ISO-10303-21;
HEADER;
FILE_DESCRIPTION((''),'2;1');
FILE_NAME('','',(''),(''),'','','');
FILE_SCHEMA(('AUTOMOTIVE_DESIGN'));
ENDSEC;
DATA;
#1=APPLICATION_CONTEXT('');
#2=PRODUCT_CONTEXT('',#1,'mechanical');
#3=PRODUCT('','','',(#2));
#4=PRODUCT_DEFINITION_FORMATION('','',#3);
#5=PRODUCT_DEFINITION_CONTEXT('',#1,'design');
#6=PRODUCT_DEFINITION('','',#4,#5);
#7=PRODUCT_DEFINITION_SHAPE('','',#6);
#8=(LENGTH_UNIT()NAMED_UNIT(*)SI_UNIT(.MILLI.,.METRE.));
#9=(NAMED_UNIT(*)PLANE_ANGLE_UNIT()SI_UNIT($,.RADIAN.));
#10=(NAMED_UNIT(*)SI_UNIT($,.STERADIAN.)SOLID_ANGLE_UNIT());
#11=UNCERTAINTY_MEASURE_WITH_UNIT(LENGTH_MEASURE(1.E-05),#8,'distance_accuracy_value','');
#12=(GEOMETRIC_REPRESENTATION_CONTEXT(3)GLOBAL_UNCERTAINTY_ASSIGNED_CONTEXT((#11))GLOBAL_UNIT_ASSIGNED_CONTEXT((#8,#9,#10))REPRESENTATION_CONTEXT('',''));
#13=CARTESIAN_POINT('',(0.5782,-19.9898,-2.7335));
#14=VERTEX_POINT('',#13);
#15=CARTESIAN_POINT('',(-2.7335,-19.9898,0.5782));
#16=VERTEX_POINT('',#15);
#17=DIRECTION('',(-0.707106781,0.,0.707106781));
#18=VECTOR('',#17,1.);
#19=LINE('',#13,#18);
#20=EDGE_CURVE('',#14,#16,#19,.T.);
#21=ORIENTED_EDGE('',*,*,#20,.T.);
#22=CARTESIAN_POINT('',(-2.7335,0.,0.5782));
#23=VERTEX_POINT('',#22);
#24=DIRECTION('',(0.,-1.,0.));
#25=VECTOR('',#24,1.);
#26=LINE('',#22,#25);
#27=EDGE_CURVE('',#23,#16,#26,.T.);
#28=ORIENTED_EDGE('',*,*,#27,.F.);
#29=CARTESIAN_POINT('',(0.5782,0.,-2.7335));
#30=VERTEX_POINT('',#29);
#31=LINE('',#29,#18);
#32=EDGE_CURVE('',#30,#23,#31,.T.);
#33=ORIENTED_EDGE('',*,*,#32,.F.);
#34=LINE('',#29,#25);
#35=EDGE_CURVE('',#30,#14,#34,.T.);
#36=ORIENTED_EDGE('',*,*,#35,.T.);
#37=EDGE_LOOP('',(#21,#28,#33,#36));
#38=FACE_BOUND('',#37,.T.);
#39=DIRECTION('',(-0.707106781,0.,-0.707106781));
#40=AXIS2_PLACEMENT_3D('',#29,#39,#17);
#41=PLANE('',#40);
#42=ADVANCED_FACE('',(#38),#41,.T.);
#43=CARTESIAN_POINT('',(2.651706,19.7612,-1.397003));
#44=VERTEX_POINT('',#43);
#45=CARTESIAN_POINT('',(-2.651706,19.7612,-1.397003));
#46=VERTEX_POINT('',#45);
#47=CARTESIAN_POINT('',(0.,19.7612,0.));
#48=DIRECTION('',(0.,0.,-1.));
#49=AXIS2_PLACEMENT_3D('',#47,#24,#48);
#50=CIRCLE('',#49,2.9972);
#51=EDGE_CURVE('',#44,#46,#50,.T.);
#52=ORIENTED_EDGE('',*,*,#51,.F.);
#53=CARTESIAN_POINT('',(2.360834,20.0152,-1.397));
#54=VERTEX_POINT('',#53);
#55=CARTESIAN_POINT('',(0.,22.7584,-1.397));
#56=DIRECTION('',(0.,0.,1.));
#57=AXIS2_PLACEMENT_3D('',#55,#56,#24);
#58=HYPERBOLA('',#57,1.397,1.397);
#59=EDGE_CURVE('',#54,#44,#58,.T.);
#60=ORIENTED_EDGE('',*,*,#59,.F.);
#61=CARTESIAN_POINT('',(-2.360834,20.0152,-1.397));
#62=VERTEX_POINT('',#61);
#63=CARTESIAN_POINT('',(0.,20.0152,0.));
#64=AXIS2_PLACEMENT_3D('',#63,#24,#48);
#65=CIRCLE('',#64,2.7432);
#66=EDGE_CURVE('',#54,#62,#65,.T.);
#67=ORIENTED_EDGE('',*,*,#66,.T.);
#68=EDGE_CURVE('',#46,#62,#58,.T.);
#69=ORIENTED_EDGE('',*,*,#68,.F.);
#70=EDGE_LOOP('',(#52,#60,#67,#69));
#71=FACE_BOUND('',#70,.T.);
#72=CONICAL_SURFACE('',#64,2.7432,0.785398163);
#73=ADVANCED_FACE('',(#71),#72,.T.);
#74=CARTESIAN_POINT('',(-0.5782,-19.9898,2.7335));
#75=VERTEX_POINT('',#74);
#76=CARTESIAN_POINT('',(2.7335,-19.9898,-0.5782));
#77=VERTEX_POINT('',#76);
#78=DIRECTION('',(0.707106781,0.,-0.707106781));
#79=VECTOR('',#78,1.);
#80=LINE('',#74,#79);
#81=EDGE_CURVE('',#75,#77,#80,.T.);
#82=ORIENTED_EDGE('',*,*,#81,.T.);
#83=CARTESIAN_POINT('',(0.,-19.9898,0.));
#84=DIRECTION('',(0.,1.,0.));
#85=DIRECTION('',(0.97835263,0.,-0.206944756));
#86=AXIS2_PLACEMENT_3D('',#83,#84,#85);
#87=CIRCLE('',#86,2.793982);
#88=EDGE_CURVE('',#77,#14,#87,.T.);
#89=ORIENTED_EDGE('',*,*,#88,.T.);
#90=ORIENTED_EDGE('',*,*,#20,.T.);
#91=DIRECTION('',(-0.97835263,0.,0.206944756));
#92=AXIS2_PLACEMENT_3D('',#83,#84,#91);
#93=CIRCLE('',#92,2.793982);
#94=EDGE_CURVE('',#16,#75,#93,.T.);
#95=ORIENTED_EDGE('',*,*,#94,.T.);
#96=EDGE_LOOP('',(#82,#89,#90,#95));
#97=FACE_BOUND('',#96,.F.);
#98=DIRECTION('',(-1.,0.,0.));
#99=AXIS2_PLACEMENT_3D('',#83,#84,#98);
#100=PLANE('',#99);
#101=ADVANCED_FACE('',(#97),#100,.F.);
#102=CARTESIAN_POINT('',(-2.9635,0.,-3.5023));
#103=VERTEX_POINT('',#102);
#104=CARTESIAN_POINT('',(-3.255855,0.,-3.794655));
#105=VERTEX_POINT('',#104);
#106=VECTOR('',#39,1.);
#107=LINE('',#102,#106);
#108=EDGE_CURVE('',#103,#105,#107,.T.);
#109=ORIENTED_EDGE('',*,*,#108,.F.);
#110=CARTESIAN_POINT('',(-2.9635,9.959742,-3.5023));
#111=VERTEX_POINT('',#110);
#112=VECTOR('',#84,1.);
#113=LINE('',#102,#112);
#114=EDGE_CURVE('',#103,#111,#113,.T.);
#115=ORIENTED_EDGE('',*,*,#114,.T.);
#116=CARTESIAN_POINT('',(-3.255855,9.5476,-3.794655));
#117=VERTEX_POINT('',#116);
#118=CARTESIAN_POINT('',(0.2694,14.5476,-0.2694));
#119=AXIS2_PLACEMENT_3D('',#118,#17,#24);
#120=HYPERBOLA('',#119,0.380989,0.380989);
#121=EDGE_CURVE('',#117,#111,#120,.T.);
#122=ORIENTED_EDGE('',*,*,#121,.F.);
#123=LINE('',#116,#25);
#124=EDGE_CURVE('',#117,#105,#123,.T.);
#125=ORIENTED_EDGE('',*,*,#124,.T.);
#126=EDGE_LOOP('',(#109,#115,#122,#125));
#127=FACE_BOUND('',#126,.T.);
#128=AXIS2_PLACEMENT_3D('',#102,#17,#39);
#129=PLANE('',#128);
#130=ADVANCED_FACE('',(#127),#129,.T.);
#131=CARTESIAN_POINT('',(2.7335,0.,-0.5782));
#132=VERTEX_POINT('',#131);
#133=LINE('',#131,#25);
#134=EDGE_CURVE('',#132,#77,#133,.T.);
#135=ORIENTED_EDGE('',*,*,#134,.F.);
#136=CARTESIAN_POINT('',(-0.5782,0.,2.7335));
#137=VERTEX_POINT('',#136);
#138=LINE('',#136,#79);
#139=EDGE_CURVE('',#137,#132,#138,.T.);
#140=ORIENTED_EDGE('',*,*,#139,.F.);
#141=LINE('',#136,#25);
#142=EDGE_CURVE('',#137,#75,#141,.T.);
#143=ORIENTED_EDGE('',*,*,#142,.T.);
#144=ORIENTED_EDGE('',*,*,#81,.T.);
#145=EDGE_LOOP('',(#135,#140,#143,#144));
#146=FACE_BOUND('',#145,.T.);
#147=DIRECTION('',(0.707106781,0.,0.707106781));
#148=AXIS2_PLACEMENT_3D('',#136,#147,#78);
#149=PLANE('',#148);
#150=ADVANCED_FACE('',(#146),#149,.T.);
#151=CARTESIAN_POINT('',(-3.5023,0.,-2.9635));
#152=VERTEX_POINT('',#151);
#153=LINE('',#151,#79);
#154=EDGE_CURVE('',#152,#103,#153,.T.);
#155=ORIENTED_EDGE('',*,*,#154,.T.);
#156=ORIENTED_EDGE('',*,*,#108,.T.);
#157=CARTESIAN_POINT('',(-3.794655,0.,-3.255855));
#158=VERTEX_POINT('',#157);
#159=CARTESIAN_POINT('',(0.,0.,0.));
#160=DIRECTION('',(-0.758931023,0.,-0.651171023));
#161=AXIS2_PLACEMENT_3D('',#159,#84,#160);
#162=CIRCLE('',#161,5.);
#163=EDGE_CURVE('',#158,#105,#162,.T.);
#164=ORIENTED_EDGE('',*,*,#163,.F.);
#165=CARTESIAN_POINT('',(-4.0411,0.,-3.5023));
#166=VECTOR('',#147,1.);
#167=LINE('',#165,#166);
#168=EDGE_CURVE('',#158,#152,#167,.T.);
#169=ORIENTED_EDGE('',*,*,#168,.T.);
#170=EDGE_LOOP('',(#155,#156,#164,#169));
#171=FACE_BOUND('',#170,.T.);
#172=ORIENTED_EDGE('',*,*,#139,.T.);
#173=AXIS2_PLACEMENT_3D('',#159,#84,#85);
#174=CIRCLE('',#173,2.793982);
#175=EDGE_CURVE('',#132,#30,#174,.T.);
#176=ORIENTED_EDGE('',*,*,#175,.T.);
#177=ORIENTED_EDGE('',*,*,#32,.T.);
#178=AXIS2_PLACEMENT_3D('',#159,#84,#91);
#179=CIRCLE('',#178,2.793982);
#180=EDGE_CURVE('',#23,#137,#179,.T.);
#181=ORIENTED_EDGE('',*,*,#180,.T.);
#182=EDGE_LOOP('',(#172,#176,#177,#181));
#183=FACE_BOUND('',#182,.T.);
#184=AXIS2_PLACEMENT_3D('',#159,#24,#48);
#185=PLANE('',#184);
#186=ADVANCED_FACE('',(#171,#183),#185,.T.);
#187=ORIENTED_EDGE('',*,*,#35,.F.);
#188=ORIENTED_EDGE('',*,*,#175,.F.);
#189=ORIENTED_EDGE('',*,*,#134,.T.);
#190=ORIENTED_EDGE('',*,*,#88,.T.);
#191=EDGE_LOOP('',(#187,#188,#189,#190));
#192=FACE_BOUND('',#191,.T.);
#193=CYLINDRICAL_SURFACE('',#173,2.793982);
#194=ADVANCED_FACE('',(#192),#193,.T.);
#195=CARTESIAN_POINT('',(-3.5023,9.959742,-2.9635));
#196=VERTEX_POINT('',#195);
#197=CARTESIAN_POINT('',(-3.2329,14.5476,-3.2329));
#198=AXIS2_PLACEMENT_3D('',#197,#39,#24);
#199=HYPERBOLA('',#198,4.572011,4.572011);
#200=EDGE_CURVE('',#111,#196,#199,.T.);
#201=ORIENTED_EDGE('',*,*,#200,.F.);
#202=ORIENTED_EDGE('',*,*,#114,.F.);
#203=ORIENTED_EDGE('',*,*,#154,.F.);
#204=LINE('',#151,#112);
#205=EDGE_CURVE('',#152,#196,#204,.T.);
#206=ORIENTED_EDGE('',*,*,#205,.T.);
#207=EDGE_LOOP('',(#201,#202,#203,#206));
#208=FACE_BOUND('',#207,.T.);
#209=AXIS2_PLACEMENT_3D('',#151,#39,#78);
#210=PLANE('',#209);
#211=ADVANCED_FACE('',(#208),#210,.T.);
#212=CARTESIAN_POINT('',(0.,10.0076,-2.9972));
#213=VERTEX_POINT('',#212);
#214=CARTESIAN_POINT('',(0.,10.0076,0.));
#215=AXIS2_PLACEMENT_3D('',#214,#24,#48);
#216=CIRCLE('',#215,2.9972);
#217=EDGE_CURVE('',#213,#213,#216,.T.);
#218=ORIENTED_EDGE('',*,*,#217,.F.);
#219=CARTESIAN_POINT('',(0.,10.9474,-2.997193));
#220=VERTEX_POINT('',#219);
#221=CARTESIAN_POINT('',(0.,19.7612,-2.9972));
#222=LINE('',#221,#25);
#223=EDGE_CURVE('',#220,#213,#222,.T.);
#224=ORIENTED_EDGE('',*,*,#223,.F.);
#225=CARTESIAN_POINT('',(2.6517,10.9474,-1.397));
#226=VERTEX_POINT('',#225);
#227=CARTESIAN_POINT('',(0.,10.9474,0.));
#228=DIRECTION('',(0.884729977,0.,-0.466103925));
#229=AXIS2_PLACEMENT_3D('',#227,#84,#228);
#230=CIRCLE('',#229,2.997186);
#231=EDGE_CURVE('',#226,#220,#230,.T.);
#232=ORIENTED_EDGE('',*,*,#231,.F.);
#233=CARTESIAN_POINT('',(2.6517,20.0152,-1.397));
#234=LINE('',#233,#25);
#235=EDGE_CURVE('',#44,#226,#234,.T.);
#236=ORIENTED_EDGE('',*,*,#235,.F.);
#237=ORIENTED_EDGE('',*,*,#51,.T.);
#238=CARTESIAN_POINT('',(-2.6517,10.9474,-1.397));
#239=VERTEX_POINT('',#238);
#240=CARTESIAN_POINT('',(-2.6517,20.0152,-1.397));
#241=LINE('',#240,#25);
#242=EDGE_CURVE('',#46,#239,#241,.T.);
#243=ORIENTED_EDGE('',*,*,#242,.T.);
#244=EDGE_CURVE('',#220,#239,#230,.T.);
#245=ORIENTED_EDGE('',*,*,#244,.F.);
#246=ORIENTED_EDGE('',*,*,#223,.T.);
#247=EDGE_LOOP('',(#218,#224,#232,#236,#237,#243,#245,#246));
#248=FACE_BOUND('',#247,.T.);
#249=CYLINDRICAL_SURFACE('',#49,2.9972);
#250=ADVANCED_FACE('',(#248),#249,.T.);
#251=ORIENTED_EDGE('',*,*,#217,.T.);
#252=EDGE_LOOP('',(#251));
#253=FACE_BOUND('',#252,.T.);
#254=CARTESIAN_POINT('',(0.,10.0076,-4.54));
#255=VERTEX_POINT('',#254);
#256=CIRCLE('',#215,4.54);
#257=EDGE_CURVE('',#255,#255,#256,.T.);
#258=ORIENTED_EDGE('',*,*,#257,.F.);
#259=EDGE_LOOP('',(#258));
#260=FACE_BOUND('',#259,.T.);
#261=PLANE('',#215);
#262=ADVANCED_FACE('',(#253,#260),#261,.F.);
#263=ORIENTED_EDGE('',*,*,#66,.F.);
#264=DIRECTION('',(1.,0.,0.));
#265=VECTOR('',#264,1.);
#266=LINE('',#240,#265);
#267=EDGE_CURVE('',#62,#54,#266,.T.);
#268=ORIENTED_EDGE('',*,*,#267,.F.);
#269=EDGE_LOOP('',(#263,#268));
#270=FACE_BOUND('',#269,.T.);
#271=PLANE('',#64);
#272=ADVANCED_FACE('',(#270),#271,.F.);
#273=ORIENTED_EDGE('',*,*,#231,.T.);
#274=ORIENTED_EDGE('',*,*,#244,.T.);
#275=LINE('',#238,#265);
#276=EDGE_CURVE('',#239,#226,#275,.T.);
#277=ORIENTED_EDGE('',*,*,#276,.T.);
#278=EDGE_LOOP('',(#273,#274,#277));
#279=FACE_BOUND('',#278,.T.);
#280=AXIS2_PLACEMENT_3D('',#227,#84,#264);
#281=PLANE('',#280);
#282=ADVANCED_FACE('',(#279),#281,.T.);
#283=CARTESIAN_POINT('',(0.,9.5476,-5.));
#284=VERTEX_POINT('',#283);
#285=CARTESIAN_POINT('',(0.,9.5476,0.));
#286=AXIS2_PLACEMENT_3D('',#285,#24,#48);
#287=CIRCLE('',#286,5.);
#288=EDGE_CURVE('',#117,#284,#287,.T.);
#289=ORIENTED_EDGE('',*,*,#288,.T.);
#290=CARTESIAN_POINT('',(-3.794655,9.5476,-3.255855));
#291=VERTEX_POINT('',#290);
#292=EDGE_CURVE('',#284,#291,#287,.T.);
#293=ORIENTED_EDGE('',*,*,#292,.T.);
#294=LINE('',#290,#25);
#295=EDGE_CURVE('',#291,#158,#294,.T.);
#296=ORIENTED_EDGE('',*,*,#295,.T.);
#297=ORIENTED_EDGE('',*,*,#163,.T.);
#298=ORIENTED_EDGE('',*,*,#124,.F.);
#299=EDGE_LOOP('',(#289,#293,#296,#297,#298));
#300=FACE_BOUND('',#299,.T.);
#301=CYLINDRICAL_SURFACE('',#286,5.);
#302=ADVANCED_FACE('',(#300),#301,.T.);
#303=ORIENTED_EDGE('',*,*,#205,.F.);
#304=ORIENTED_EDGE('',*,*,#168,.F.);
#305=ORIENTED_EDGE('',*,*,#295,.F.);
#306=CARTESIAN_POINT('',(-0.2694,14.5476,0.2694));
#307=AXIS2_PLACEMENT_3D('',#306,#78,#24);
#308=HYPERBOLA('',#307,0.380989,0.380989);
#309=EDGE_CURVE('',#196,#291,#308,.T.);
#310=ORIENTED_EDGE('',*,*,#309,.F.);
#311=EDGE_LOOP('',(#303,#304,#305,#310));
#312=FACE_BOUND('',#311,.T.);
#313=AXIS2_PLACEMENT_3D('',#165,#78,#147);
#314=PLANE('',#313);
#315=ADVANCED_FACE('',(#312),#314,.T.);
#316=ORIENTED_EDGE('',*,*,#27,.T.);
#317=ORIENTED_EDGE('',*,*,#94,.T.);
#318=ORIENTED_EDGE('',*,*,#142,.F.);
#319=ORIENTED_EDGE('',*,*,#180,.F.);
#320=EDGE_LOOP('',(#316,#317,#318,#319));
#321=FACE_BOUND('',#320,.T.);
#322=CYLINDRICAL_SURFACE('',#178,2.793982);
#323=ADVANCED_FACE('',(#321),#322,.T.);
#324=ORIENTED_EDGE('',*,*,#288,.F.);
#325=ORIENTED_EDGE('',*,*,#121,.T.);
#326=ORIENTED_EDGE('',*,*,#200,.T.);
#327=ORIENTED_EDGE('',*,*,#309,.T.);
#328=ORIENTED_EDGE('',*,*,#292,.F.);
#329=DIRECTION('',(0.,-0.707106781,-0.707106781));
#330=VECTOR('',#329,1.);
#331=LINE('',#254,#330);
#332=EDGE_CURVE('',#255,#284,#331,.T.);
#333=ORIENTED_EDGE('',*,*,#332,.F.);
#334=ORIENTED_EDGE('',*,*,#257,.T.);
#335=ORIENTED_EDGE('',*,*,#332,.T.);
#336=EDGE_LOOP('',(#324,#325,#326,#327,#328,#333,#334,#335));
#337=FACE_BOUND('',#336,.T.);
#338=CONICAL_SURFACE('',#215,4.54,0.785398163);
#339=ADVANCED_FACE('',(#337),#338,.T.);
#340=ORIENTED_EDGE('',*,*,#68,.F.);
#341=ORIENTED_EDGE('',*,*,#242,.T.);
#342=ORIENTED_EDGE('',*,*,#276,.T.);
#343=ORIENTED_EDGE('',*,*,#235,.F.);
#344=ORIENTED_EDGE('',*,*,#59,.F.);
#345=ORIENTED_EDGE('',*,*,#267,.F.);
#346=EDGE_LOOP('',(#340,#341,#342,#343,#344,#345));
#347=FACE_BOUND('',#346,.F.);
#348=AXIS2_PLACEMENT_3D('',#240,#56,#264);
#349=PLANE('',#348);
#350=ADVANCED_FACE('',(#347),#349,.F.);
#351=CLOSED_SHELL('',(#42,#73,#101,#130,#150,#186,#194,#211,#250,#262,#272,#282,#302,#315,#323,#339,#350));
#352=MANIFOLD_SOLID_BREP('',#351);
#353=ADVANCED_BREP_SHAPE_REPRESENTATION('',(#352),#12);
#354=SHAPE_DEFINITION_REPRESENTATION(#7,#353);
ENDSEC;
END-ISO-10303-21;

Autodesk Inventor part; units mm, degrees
sketch "Sketch_2" plane through (0, 0, 0) normal (1, 0, 0) x (0, 1, 0)
  line L0 (0, 0) -> (20.0152, 0)
  line L1 (20.0152, 0) -> (20.0152, -2.7432)
  line L2 (20.0152, -2.7432) -> (19.7612, -2.9972)
  line L3 (19.7612, -2.9972) -> (10.0076, -2.9972)
  line L4 (10.0076, -2.9972) -> (10.0076, -4.54)
  line L5 (10.0076, -4.54) -> (9.5476, -5)
  line L6 (9.5476, -5) -> (0, -5)
  line L7 (0, -5) -> (0, 0)
  line L8 (0, 0) -> (20.0152, 0)
revolve "Revolution1" add sketch "Sketch_2" angle 360 about axis through (0, 0, 0) along (0, -1, 0)
thread "Thread1" size "M10x0.75" class "6g" standard "ISO Metric profile" full length
sketch "Sketch_3" plane through (0, 20.0152, 0) normal (0, 1, 0) x (1, 0, 0)
  line L0 (-2.6517, 1.397) -> (2.6517, 1.397)
  arc A0 (2.6517, 1.397) -> (-2.6517, 1.397) centre (0, 0) ccw
extrude "Extrusion1" cut sketch "Sketch_3" against normal blind 9.0678
sketch "Sketch_5" plane through (0, 0, 0) normal (0, 1, 0) x (-1, 0, 0)
  arc A0 (2.7335, 0.5782) -> (0.5782, 2.7335) centre (0, 0) ccw
  line L0 (0.5782, 2.7335) -> (-2.7335, -0.5782)
  arc A1 (-2.7335, -0.5782) -> (-0.5782, -2.7335) centre (0, 0) ccw
  line L1 (-0.5782, -2.7335) -> (2.7335, 0.5782)
extrude "Extrusion2" add sketch "Sketch_5" against normal blind 19.9898
sketch "Sketch_10" plane through (0, 0, 0) normal (0, 1, 0) x (-1, 0, 0)
  line L0 (4.0411, -3.5023) -> (3.5023, -2.9635)
  line L1 (3.5023, -2.9635) -> (2.9635, -3.5023)
  line L2 (2.9635, -3.5023) -> (3.5023, -4.0411)
  line L3 (3.5023, -4.0411) -> (4.0411, -3.5023)
extrude "Extrusion3" cut sketch "Sketch_10" along normal blind 25.4
ref_plane "at518_XY" through (0, 3.4925, 0) normal (0, -1, 0) x (1, 0, 0)
ref_plane "at518_YZ" through (0, 3.4925, 0) normal (1, 0, 0) x (0, 0, 1)
ref_plane "at518_ZX" through (0, 3.4925, 0) normal (0, 0, 1) x (0, -1, 0)
ref_plane "at520_XY" through (0, 2.5019, 0) normal (0, -1, 0) x (1, 0, 0)
ref_plane "at520_YZ" through (0, 2.5019, 0) normal (1, 0, 0) x (0, 0, 1)
ref_plane "at520_ZX" through (0, 2.5019, 0) normal (0, 0, 1) x (0, -1, 0)
ref_plane "at526_a_XY" through (0, 1.0033, 0) normal (0, -1, 0) x (1, 0, 0)
ref_plane "at526_a_YZ" through (0, 1.0033, 0) normal (1, 0, 0) x (0, 0, 1)
ref_plane "at526_a_ZX" through (0, 1.0033, 0) normal (0, 0, 1) x (0, -1, 0)
ref_plane "at526_b_XY" through (0, 4.9911, 0) normal (0, -1, 0) x (1, 0, 0)
ref_plane "at526_b_YZ" through (0, 4.9911, 0) normal (1, 0, 0) x (0, 0, 1)
ref_plane "at526_b_ZX" through (0, 4.9911, 0) normal (0, 0, 1) x (0, -1, 0)
ref_plane "to_body_XY" through (0, 0, 0) normal (0, 1, 0) x (1, 0, 0)
ref_plane "to_body_YZ" through (0, 0, 0) normal (1, 0, 0) x (0, 0, -1)
ref_plane "to_body_ZX" through (0, 0, 0) normal (0, 0, -1) x (0, 1, 0)
properties part number "HS13Z-D-shaft"
